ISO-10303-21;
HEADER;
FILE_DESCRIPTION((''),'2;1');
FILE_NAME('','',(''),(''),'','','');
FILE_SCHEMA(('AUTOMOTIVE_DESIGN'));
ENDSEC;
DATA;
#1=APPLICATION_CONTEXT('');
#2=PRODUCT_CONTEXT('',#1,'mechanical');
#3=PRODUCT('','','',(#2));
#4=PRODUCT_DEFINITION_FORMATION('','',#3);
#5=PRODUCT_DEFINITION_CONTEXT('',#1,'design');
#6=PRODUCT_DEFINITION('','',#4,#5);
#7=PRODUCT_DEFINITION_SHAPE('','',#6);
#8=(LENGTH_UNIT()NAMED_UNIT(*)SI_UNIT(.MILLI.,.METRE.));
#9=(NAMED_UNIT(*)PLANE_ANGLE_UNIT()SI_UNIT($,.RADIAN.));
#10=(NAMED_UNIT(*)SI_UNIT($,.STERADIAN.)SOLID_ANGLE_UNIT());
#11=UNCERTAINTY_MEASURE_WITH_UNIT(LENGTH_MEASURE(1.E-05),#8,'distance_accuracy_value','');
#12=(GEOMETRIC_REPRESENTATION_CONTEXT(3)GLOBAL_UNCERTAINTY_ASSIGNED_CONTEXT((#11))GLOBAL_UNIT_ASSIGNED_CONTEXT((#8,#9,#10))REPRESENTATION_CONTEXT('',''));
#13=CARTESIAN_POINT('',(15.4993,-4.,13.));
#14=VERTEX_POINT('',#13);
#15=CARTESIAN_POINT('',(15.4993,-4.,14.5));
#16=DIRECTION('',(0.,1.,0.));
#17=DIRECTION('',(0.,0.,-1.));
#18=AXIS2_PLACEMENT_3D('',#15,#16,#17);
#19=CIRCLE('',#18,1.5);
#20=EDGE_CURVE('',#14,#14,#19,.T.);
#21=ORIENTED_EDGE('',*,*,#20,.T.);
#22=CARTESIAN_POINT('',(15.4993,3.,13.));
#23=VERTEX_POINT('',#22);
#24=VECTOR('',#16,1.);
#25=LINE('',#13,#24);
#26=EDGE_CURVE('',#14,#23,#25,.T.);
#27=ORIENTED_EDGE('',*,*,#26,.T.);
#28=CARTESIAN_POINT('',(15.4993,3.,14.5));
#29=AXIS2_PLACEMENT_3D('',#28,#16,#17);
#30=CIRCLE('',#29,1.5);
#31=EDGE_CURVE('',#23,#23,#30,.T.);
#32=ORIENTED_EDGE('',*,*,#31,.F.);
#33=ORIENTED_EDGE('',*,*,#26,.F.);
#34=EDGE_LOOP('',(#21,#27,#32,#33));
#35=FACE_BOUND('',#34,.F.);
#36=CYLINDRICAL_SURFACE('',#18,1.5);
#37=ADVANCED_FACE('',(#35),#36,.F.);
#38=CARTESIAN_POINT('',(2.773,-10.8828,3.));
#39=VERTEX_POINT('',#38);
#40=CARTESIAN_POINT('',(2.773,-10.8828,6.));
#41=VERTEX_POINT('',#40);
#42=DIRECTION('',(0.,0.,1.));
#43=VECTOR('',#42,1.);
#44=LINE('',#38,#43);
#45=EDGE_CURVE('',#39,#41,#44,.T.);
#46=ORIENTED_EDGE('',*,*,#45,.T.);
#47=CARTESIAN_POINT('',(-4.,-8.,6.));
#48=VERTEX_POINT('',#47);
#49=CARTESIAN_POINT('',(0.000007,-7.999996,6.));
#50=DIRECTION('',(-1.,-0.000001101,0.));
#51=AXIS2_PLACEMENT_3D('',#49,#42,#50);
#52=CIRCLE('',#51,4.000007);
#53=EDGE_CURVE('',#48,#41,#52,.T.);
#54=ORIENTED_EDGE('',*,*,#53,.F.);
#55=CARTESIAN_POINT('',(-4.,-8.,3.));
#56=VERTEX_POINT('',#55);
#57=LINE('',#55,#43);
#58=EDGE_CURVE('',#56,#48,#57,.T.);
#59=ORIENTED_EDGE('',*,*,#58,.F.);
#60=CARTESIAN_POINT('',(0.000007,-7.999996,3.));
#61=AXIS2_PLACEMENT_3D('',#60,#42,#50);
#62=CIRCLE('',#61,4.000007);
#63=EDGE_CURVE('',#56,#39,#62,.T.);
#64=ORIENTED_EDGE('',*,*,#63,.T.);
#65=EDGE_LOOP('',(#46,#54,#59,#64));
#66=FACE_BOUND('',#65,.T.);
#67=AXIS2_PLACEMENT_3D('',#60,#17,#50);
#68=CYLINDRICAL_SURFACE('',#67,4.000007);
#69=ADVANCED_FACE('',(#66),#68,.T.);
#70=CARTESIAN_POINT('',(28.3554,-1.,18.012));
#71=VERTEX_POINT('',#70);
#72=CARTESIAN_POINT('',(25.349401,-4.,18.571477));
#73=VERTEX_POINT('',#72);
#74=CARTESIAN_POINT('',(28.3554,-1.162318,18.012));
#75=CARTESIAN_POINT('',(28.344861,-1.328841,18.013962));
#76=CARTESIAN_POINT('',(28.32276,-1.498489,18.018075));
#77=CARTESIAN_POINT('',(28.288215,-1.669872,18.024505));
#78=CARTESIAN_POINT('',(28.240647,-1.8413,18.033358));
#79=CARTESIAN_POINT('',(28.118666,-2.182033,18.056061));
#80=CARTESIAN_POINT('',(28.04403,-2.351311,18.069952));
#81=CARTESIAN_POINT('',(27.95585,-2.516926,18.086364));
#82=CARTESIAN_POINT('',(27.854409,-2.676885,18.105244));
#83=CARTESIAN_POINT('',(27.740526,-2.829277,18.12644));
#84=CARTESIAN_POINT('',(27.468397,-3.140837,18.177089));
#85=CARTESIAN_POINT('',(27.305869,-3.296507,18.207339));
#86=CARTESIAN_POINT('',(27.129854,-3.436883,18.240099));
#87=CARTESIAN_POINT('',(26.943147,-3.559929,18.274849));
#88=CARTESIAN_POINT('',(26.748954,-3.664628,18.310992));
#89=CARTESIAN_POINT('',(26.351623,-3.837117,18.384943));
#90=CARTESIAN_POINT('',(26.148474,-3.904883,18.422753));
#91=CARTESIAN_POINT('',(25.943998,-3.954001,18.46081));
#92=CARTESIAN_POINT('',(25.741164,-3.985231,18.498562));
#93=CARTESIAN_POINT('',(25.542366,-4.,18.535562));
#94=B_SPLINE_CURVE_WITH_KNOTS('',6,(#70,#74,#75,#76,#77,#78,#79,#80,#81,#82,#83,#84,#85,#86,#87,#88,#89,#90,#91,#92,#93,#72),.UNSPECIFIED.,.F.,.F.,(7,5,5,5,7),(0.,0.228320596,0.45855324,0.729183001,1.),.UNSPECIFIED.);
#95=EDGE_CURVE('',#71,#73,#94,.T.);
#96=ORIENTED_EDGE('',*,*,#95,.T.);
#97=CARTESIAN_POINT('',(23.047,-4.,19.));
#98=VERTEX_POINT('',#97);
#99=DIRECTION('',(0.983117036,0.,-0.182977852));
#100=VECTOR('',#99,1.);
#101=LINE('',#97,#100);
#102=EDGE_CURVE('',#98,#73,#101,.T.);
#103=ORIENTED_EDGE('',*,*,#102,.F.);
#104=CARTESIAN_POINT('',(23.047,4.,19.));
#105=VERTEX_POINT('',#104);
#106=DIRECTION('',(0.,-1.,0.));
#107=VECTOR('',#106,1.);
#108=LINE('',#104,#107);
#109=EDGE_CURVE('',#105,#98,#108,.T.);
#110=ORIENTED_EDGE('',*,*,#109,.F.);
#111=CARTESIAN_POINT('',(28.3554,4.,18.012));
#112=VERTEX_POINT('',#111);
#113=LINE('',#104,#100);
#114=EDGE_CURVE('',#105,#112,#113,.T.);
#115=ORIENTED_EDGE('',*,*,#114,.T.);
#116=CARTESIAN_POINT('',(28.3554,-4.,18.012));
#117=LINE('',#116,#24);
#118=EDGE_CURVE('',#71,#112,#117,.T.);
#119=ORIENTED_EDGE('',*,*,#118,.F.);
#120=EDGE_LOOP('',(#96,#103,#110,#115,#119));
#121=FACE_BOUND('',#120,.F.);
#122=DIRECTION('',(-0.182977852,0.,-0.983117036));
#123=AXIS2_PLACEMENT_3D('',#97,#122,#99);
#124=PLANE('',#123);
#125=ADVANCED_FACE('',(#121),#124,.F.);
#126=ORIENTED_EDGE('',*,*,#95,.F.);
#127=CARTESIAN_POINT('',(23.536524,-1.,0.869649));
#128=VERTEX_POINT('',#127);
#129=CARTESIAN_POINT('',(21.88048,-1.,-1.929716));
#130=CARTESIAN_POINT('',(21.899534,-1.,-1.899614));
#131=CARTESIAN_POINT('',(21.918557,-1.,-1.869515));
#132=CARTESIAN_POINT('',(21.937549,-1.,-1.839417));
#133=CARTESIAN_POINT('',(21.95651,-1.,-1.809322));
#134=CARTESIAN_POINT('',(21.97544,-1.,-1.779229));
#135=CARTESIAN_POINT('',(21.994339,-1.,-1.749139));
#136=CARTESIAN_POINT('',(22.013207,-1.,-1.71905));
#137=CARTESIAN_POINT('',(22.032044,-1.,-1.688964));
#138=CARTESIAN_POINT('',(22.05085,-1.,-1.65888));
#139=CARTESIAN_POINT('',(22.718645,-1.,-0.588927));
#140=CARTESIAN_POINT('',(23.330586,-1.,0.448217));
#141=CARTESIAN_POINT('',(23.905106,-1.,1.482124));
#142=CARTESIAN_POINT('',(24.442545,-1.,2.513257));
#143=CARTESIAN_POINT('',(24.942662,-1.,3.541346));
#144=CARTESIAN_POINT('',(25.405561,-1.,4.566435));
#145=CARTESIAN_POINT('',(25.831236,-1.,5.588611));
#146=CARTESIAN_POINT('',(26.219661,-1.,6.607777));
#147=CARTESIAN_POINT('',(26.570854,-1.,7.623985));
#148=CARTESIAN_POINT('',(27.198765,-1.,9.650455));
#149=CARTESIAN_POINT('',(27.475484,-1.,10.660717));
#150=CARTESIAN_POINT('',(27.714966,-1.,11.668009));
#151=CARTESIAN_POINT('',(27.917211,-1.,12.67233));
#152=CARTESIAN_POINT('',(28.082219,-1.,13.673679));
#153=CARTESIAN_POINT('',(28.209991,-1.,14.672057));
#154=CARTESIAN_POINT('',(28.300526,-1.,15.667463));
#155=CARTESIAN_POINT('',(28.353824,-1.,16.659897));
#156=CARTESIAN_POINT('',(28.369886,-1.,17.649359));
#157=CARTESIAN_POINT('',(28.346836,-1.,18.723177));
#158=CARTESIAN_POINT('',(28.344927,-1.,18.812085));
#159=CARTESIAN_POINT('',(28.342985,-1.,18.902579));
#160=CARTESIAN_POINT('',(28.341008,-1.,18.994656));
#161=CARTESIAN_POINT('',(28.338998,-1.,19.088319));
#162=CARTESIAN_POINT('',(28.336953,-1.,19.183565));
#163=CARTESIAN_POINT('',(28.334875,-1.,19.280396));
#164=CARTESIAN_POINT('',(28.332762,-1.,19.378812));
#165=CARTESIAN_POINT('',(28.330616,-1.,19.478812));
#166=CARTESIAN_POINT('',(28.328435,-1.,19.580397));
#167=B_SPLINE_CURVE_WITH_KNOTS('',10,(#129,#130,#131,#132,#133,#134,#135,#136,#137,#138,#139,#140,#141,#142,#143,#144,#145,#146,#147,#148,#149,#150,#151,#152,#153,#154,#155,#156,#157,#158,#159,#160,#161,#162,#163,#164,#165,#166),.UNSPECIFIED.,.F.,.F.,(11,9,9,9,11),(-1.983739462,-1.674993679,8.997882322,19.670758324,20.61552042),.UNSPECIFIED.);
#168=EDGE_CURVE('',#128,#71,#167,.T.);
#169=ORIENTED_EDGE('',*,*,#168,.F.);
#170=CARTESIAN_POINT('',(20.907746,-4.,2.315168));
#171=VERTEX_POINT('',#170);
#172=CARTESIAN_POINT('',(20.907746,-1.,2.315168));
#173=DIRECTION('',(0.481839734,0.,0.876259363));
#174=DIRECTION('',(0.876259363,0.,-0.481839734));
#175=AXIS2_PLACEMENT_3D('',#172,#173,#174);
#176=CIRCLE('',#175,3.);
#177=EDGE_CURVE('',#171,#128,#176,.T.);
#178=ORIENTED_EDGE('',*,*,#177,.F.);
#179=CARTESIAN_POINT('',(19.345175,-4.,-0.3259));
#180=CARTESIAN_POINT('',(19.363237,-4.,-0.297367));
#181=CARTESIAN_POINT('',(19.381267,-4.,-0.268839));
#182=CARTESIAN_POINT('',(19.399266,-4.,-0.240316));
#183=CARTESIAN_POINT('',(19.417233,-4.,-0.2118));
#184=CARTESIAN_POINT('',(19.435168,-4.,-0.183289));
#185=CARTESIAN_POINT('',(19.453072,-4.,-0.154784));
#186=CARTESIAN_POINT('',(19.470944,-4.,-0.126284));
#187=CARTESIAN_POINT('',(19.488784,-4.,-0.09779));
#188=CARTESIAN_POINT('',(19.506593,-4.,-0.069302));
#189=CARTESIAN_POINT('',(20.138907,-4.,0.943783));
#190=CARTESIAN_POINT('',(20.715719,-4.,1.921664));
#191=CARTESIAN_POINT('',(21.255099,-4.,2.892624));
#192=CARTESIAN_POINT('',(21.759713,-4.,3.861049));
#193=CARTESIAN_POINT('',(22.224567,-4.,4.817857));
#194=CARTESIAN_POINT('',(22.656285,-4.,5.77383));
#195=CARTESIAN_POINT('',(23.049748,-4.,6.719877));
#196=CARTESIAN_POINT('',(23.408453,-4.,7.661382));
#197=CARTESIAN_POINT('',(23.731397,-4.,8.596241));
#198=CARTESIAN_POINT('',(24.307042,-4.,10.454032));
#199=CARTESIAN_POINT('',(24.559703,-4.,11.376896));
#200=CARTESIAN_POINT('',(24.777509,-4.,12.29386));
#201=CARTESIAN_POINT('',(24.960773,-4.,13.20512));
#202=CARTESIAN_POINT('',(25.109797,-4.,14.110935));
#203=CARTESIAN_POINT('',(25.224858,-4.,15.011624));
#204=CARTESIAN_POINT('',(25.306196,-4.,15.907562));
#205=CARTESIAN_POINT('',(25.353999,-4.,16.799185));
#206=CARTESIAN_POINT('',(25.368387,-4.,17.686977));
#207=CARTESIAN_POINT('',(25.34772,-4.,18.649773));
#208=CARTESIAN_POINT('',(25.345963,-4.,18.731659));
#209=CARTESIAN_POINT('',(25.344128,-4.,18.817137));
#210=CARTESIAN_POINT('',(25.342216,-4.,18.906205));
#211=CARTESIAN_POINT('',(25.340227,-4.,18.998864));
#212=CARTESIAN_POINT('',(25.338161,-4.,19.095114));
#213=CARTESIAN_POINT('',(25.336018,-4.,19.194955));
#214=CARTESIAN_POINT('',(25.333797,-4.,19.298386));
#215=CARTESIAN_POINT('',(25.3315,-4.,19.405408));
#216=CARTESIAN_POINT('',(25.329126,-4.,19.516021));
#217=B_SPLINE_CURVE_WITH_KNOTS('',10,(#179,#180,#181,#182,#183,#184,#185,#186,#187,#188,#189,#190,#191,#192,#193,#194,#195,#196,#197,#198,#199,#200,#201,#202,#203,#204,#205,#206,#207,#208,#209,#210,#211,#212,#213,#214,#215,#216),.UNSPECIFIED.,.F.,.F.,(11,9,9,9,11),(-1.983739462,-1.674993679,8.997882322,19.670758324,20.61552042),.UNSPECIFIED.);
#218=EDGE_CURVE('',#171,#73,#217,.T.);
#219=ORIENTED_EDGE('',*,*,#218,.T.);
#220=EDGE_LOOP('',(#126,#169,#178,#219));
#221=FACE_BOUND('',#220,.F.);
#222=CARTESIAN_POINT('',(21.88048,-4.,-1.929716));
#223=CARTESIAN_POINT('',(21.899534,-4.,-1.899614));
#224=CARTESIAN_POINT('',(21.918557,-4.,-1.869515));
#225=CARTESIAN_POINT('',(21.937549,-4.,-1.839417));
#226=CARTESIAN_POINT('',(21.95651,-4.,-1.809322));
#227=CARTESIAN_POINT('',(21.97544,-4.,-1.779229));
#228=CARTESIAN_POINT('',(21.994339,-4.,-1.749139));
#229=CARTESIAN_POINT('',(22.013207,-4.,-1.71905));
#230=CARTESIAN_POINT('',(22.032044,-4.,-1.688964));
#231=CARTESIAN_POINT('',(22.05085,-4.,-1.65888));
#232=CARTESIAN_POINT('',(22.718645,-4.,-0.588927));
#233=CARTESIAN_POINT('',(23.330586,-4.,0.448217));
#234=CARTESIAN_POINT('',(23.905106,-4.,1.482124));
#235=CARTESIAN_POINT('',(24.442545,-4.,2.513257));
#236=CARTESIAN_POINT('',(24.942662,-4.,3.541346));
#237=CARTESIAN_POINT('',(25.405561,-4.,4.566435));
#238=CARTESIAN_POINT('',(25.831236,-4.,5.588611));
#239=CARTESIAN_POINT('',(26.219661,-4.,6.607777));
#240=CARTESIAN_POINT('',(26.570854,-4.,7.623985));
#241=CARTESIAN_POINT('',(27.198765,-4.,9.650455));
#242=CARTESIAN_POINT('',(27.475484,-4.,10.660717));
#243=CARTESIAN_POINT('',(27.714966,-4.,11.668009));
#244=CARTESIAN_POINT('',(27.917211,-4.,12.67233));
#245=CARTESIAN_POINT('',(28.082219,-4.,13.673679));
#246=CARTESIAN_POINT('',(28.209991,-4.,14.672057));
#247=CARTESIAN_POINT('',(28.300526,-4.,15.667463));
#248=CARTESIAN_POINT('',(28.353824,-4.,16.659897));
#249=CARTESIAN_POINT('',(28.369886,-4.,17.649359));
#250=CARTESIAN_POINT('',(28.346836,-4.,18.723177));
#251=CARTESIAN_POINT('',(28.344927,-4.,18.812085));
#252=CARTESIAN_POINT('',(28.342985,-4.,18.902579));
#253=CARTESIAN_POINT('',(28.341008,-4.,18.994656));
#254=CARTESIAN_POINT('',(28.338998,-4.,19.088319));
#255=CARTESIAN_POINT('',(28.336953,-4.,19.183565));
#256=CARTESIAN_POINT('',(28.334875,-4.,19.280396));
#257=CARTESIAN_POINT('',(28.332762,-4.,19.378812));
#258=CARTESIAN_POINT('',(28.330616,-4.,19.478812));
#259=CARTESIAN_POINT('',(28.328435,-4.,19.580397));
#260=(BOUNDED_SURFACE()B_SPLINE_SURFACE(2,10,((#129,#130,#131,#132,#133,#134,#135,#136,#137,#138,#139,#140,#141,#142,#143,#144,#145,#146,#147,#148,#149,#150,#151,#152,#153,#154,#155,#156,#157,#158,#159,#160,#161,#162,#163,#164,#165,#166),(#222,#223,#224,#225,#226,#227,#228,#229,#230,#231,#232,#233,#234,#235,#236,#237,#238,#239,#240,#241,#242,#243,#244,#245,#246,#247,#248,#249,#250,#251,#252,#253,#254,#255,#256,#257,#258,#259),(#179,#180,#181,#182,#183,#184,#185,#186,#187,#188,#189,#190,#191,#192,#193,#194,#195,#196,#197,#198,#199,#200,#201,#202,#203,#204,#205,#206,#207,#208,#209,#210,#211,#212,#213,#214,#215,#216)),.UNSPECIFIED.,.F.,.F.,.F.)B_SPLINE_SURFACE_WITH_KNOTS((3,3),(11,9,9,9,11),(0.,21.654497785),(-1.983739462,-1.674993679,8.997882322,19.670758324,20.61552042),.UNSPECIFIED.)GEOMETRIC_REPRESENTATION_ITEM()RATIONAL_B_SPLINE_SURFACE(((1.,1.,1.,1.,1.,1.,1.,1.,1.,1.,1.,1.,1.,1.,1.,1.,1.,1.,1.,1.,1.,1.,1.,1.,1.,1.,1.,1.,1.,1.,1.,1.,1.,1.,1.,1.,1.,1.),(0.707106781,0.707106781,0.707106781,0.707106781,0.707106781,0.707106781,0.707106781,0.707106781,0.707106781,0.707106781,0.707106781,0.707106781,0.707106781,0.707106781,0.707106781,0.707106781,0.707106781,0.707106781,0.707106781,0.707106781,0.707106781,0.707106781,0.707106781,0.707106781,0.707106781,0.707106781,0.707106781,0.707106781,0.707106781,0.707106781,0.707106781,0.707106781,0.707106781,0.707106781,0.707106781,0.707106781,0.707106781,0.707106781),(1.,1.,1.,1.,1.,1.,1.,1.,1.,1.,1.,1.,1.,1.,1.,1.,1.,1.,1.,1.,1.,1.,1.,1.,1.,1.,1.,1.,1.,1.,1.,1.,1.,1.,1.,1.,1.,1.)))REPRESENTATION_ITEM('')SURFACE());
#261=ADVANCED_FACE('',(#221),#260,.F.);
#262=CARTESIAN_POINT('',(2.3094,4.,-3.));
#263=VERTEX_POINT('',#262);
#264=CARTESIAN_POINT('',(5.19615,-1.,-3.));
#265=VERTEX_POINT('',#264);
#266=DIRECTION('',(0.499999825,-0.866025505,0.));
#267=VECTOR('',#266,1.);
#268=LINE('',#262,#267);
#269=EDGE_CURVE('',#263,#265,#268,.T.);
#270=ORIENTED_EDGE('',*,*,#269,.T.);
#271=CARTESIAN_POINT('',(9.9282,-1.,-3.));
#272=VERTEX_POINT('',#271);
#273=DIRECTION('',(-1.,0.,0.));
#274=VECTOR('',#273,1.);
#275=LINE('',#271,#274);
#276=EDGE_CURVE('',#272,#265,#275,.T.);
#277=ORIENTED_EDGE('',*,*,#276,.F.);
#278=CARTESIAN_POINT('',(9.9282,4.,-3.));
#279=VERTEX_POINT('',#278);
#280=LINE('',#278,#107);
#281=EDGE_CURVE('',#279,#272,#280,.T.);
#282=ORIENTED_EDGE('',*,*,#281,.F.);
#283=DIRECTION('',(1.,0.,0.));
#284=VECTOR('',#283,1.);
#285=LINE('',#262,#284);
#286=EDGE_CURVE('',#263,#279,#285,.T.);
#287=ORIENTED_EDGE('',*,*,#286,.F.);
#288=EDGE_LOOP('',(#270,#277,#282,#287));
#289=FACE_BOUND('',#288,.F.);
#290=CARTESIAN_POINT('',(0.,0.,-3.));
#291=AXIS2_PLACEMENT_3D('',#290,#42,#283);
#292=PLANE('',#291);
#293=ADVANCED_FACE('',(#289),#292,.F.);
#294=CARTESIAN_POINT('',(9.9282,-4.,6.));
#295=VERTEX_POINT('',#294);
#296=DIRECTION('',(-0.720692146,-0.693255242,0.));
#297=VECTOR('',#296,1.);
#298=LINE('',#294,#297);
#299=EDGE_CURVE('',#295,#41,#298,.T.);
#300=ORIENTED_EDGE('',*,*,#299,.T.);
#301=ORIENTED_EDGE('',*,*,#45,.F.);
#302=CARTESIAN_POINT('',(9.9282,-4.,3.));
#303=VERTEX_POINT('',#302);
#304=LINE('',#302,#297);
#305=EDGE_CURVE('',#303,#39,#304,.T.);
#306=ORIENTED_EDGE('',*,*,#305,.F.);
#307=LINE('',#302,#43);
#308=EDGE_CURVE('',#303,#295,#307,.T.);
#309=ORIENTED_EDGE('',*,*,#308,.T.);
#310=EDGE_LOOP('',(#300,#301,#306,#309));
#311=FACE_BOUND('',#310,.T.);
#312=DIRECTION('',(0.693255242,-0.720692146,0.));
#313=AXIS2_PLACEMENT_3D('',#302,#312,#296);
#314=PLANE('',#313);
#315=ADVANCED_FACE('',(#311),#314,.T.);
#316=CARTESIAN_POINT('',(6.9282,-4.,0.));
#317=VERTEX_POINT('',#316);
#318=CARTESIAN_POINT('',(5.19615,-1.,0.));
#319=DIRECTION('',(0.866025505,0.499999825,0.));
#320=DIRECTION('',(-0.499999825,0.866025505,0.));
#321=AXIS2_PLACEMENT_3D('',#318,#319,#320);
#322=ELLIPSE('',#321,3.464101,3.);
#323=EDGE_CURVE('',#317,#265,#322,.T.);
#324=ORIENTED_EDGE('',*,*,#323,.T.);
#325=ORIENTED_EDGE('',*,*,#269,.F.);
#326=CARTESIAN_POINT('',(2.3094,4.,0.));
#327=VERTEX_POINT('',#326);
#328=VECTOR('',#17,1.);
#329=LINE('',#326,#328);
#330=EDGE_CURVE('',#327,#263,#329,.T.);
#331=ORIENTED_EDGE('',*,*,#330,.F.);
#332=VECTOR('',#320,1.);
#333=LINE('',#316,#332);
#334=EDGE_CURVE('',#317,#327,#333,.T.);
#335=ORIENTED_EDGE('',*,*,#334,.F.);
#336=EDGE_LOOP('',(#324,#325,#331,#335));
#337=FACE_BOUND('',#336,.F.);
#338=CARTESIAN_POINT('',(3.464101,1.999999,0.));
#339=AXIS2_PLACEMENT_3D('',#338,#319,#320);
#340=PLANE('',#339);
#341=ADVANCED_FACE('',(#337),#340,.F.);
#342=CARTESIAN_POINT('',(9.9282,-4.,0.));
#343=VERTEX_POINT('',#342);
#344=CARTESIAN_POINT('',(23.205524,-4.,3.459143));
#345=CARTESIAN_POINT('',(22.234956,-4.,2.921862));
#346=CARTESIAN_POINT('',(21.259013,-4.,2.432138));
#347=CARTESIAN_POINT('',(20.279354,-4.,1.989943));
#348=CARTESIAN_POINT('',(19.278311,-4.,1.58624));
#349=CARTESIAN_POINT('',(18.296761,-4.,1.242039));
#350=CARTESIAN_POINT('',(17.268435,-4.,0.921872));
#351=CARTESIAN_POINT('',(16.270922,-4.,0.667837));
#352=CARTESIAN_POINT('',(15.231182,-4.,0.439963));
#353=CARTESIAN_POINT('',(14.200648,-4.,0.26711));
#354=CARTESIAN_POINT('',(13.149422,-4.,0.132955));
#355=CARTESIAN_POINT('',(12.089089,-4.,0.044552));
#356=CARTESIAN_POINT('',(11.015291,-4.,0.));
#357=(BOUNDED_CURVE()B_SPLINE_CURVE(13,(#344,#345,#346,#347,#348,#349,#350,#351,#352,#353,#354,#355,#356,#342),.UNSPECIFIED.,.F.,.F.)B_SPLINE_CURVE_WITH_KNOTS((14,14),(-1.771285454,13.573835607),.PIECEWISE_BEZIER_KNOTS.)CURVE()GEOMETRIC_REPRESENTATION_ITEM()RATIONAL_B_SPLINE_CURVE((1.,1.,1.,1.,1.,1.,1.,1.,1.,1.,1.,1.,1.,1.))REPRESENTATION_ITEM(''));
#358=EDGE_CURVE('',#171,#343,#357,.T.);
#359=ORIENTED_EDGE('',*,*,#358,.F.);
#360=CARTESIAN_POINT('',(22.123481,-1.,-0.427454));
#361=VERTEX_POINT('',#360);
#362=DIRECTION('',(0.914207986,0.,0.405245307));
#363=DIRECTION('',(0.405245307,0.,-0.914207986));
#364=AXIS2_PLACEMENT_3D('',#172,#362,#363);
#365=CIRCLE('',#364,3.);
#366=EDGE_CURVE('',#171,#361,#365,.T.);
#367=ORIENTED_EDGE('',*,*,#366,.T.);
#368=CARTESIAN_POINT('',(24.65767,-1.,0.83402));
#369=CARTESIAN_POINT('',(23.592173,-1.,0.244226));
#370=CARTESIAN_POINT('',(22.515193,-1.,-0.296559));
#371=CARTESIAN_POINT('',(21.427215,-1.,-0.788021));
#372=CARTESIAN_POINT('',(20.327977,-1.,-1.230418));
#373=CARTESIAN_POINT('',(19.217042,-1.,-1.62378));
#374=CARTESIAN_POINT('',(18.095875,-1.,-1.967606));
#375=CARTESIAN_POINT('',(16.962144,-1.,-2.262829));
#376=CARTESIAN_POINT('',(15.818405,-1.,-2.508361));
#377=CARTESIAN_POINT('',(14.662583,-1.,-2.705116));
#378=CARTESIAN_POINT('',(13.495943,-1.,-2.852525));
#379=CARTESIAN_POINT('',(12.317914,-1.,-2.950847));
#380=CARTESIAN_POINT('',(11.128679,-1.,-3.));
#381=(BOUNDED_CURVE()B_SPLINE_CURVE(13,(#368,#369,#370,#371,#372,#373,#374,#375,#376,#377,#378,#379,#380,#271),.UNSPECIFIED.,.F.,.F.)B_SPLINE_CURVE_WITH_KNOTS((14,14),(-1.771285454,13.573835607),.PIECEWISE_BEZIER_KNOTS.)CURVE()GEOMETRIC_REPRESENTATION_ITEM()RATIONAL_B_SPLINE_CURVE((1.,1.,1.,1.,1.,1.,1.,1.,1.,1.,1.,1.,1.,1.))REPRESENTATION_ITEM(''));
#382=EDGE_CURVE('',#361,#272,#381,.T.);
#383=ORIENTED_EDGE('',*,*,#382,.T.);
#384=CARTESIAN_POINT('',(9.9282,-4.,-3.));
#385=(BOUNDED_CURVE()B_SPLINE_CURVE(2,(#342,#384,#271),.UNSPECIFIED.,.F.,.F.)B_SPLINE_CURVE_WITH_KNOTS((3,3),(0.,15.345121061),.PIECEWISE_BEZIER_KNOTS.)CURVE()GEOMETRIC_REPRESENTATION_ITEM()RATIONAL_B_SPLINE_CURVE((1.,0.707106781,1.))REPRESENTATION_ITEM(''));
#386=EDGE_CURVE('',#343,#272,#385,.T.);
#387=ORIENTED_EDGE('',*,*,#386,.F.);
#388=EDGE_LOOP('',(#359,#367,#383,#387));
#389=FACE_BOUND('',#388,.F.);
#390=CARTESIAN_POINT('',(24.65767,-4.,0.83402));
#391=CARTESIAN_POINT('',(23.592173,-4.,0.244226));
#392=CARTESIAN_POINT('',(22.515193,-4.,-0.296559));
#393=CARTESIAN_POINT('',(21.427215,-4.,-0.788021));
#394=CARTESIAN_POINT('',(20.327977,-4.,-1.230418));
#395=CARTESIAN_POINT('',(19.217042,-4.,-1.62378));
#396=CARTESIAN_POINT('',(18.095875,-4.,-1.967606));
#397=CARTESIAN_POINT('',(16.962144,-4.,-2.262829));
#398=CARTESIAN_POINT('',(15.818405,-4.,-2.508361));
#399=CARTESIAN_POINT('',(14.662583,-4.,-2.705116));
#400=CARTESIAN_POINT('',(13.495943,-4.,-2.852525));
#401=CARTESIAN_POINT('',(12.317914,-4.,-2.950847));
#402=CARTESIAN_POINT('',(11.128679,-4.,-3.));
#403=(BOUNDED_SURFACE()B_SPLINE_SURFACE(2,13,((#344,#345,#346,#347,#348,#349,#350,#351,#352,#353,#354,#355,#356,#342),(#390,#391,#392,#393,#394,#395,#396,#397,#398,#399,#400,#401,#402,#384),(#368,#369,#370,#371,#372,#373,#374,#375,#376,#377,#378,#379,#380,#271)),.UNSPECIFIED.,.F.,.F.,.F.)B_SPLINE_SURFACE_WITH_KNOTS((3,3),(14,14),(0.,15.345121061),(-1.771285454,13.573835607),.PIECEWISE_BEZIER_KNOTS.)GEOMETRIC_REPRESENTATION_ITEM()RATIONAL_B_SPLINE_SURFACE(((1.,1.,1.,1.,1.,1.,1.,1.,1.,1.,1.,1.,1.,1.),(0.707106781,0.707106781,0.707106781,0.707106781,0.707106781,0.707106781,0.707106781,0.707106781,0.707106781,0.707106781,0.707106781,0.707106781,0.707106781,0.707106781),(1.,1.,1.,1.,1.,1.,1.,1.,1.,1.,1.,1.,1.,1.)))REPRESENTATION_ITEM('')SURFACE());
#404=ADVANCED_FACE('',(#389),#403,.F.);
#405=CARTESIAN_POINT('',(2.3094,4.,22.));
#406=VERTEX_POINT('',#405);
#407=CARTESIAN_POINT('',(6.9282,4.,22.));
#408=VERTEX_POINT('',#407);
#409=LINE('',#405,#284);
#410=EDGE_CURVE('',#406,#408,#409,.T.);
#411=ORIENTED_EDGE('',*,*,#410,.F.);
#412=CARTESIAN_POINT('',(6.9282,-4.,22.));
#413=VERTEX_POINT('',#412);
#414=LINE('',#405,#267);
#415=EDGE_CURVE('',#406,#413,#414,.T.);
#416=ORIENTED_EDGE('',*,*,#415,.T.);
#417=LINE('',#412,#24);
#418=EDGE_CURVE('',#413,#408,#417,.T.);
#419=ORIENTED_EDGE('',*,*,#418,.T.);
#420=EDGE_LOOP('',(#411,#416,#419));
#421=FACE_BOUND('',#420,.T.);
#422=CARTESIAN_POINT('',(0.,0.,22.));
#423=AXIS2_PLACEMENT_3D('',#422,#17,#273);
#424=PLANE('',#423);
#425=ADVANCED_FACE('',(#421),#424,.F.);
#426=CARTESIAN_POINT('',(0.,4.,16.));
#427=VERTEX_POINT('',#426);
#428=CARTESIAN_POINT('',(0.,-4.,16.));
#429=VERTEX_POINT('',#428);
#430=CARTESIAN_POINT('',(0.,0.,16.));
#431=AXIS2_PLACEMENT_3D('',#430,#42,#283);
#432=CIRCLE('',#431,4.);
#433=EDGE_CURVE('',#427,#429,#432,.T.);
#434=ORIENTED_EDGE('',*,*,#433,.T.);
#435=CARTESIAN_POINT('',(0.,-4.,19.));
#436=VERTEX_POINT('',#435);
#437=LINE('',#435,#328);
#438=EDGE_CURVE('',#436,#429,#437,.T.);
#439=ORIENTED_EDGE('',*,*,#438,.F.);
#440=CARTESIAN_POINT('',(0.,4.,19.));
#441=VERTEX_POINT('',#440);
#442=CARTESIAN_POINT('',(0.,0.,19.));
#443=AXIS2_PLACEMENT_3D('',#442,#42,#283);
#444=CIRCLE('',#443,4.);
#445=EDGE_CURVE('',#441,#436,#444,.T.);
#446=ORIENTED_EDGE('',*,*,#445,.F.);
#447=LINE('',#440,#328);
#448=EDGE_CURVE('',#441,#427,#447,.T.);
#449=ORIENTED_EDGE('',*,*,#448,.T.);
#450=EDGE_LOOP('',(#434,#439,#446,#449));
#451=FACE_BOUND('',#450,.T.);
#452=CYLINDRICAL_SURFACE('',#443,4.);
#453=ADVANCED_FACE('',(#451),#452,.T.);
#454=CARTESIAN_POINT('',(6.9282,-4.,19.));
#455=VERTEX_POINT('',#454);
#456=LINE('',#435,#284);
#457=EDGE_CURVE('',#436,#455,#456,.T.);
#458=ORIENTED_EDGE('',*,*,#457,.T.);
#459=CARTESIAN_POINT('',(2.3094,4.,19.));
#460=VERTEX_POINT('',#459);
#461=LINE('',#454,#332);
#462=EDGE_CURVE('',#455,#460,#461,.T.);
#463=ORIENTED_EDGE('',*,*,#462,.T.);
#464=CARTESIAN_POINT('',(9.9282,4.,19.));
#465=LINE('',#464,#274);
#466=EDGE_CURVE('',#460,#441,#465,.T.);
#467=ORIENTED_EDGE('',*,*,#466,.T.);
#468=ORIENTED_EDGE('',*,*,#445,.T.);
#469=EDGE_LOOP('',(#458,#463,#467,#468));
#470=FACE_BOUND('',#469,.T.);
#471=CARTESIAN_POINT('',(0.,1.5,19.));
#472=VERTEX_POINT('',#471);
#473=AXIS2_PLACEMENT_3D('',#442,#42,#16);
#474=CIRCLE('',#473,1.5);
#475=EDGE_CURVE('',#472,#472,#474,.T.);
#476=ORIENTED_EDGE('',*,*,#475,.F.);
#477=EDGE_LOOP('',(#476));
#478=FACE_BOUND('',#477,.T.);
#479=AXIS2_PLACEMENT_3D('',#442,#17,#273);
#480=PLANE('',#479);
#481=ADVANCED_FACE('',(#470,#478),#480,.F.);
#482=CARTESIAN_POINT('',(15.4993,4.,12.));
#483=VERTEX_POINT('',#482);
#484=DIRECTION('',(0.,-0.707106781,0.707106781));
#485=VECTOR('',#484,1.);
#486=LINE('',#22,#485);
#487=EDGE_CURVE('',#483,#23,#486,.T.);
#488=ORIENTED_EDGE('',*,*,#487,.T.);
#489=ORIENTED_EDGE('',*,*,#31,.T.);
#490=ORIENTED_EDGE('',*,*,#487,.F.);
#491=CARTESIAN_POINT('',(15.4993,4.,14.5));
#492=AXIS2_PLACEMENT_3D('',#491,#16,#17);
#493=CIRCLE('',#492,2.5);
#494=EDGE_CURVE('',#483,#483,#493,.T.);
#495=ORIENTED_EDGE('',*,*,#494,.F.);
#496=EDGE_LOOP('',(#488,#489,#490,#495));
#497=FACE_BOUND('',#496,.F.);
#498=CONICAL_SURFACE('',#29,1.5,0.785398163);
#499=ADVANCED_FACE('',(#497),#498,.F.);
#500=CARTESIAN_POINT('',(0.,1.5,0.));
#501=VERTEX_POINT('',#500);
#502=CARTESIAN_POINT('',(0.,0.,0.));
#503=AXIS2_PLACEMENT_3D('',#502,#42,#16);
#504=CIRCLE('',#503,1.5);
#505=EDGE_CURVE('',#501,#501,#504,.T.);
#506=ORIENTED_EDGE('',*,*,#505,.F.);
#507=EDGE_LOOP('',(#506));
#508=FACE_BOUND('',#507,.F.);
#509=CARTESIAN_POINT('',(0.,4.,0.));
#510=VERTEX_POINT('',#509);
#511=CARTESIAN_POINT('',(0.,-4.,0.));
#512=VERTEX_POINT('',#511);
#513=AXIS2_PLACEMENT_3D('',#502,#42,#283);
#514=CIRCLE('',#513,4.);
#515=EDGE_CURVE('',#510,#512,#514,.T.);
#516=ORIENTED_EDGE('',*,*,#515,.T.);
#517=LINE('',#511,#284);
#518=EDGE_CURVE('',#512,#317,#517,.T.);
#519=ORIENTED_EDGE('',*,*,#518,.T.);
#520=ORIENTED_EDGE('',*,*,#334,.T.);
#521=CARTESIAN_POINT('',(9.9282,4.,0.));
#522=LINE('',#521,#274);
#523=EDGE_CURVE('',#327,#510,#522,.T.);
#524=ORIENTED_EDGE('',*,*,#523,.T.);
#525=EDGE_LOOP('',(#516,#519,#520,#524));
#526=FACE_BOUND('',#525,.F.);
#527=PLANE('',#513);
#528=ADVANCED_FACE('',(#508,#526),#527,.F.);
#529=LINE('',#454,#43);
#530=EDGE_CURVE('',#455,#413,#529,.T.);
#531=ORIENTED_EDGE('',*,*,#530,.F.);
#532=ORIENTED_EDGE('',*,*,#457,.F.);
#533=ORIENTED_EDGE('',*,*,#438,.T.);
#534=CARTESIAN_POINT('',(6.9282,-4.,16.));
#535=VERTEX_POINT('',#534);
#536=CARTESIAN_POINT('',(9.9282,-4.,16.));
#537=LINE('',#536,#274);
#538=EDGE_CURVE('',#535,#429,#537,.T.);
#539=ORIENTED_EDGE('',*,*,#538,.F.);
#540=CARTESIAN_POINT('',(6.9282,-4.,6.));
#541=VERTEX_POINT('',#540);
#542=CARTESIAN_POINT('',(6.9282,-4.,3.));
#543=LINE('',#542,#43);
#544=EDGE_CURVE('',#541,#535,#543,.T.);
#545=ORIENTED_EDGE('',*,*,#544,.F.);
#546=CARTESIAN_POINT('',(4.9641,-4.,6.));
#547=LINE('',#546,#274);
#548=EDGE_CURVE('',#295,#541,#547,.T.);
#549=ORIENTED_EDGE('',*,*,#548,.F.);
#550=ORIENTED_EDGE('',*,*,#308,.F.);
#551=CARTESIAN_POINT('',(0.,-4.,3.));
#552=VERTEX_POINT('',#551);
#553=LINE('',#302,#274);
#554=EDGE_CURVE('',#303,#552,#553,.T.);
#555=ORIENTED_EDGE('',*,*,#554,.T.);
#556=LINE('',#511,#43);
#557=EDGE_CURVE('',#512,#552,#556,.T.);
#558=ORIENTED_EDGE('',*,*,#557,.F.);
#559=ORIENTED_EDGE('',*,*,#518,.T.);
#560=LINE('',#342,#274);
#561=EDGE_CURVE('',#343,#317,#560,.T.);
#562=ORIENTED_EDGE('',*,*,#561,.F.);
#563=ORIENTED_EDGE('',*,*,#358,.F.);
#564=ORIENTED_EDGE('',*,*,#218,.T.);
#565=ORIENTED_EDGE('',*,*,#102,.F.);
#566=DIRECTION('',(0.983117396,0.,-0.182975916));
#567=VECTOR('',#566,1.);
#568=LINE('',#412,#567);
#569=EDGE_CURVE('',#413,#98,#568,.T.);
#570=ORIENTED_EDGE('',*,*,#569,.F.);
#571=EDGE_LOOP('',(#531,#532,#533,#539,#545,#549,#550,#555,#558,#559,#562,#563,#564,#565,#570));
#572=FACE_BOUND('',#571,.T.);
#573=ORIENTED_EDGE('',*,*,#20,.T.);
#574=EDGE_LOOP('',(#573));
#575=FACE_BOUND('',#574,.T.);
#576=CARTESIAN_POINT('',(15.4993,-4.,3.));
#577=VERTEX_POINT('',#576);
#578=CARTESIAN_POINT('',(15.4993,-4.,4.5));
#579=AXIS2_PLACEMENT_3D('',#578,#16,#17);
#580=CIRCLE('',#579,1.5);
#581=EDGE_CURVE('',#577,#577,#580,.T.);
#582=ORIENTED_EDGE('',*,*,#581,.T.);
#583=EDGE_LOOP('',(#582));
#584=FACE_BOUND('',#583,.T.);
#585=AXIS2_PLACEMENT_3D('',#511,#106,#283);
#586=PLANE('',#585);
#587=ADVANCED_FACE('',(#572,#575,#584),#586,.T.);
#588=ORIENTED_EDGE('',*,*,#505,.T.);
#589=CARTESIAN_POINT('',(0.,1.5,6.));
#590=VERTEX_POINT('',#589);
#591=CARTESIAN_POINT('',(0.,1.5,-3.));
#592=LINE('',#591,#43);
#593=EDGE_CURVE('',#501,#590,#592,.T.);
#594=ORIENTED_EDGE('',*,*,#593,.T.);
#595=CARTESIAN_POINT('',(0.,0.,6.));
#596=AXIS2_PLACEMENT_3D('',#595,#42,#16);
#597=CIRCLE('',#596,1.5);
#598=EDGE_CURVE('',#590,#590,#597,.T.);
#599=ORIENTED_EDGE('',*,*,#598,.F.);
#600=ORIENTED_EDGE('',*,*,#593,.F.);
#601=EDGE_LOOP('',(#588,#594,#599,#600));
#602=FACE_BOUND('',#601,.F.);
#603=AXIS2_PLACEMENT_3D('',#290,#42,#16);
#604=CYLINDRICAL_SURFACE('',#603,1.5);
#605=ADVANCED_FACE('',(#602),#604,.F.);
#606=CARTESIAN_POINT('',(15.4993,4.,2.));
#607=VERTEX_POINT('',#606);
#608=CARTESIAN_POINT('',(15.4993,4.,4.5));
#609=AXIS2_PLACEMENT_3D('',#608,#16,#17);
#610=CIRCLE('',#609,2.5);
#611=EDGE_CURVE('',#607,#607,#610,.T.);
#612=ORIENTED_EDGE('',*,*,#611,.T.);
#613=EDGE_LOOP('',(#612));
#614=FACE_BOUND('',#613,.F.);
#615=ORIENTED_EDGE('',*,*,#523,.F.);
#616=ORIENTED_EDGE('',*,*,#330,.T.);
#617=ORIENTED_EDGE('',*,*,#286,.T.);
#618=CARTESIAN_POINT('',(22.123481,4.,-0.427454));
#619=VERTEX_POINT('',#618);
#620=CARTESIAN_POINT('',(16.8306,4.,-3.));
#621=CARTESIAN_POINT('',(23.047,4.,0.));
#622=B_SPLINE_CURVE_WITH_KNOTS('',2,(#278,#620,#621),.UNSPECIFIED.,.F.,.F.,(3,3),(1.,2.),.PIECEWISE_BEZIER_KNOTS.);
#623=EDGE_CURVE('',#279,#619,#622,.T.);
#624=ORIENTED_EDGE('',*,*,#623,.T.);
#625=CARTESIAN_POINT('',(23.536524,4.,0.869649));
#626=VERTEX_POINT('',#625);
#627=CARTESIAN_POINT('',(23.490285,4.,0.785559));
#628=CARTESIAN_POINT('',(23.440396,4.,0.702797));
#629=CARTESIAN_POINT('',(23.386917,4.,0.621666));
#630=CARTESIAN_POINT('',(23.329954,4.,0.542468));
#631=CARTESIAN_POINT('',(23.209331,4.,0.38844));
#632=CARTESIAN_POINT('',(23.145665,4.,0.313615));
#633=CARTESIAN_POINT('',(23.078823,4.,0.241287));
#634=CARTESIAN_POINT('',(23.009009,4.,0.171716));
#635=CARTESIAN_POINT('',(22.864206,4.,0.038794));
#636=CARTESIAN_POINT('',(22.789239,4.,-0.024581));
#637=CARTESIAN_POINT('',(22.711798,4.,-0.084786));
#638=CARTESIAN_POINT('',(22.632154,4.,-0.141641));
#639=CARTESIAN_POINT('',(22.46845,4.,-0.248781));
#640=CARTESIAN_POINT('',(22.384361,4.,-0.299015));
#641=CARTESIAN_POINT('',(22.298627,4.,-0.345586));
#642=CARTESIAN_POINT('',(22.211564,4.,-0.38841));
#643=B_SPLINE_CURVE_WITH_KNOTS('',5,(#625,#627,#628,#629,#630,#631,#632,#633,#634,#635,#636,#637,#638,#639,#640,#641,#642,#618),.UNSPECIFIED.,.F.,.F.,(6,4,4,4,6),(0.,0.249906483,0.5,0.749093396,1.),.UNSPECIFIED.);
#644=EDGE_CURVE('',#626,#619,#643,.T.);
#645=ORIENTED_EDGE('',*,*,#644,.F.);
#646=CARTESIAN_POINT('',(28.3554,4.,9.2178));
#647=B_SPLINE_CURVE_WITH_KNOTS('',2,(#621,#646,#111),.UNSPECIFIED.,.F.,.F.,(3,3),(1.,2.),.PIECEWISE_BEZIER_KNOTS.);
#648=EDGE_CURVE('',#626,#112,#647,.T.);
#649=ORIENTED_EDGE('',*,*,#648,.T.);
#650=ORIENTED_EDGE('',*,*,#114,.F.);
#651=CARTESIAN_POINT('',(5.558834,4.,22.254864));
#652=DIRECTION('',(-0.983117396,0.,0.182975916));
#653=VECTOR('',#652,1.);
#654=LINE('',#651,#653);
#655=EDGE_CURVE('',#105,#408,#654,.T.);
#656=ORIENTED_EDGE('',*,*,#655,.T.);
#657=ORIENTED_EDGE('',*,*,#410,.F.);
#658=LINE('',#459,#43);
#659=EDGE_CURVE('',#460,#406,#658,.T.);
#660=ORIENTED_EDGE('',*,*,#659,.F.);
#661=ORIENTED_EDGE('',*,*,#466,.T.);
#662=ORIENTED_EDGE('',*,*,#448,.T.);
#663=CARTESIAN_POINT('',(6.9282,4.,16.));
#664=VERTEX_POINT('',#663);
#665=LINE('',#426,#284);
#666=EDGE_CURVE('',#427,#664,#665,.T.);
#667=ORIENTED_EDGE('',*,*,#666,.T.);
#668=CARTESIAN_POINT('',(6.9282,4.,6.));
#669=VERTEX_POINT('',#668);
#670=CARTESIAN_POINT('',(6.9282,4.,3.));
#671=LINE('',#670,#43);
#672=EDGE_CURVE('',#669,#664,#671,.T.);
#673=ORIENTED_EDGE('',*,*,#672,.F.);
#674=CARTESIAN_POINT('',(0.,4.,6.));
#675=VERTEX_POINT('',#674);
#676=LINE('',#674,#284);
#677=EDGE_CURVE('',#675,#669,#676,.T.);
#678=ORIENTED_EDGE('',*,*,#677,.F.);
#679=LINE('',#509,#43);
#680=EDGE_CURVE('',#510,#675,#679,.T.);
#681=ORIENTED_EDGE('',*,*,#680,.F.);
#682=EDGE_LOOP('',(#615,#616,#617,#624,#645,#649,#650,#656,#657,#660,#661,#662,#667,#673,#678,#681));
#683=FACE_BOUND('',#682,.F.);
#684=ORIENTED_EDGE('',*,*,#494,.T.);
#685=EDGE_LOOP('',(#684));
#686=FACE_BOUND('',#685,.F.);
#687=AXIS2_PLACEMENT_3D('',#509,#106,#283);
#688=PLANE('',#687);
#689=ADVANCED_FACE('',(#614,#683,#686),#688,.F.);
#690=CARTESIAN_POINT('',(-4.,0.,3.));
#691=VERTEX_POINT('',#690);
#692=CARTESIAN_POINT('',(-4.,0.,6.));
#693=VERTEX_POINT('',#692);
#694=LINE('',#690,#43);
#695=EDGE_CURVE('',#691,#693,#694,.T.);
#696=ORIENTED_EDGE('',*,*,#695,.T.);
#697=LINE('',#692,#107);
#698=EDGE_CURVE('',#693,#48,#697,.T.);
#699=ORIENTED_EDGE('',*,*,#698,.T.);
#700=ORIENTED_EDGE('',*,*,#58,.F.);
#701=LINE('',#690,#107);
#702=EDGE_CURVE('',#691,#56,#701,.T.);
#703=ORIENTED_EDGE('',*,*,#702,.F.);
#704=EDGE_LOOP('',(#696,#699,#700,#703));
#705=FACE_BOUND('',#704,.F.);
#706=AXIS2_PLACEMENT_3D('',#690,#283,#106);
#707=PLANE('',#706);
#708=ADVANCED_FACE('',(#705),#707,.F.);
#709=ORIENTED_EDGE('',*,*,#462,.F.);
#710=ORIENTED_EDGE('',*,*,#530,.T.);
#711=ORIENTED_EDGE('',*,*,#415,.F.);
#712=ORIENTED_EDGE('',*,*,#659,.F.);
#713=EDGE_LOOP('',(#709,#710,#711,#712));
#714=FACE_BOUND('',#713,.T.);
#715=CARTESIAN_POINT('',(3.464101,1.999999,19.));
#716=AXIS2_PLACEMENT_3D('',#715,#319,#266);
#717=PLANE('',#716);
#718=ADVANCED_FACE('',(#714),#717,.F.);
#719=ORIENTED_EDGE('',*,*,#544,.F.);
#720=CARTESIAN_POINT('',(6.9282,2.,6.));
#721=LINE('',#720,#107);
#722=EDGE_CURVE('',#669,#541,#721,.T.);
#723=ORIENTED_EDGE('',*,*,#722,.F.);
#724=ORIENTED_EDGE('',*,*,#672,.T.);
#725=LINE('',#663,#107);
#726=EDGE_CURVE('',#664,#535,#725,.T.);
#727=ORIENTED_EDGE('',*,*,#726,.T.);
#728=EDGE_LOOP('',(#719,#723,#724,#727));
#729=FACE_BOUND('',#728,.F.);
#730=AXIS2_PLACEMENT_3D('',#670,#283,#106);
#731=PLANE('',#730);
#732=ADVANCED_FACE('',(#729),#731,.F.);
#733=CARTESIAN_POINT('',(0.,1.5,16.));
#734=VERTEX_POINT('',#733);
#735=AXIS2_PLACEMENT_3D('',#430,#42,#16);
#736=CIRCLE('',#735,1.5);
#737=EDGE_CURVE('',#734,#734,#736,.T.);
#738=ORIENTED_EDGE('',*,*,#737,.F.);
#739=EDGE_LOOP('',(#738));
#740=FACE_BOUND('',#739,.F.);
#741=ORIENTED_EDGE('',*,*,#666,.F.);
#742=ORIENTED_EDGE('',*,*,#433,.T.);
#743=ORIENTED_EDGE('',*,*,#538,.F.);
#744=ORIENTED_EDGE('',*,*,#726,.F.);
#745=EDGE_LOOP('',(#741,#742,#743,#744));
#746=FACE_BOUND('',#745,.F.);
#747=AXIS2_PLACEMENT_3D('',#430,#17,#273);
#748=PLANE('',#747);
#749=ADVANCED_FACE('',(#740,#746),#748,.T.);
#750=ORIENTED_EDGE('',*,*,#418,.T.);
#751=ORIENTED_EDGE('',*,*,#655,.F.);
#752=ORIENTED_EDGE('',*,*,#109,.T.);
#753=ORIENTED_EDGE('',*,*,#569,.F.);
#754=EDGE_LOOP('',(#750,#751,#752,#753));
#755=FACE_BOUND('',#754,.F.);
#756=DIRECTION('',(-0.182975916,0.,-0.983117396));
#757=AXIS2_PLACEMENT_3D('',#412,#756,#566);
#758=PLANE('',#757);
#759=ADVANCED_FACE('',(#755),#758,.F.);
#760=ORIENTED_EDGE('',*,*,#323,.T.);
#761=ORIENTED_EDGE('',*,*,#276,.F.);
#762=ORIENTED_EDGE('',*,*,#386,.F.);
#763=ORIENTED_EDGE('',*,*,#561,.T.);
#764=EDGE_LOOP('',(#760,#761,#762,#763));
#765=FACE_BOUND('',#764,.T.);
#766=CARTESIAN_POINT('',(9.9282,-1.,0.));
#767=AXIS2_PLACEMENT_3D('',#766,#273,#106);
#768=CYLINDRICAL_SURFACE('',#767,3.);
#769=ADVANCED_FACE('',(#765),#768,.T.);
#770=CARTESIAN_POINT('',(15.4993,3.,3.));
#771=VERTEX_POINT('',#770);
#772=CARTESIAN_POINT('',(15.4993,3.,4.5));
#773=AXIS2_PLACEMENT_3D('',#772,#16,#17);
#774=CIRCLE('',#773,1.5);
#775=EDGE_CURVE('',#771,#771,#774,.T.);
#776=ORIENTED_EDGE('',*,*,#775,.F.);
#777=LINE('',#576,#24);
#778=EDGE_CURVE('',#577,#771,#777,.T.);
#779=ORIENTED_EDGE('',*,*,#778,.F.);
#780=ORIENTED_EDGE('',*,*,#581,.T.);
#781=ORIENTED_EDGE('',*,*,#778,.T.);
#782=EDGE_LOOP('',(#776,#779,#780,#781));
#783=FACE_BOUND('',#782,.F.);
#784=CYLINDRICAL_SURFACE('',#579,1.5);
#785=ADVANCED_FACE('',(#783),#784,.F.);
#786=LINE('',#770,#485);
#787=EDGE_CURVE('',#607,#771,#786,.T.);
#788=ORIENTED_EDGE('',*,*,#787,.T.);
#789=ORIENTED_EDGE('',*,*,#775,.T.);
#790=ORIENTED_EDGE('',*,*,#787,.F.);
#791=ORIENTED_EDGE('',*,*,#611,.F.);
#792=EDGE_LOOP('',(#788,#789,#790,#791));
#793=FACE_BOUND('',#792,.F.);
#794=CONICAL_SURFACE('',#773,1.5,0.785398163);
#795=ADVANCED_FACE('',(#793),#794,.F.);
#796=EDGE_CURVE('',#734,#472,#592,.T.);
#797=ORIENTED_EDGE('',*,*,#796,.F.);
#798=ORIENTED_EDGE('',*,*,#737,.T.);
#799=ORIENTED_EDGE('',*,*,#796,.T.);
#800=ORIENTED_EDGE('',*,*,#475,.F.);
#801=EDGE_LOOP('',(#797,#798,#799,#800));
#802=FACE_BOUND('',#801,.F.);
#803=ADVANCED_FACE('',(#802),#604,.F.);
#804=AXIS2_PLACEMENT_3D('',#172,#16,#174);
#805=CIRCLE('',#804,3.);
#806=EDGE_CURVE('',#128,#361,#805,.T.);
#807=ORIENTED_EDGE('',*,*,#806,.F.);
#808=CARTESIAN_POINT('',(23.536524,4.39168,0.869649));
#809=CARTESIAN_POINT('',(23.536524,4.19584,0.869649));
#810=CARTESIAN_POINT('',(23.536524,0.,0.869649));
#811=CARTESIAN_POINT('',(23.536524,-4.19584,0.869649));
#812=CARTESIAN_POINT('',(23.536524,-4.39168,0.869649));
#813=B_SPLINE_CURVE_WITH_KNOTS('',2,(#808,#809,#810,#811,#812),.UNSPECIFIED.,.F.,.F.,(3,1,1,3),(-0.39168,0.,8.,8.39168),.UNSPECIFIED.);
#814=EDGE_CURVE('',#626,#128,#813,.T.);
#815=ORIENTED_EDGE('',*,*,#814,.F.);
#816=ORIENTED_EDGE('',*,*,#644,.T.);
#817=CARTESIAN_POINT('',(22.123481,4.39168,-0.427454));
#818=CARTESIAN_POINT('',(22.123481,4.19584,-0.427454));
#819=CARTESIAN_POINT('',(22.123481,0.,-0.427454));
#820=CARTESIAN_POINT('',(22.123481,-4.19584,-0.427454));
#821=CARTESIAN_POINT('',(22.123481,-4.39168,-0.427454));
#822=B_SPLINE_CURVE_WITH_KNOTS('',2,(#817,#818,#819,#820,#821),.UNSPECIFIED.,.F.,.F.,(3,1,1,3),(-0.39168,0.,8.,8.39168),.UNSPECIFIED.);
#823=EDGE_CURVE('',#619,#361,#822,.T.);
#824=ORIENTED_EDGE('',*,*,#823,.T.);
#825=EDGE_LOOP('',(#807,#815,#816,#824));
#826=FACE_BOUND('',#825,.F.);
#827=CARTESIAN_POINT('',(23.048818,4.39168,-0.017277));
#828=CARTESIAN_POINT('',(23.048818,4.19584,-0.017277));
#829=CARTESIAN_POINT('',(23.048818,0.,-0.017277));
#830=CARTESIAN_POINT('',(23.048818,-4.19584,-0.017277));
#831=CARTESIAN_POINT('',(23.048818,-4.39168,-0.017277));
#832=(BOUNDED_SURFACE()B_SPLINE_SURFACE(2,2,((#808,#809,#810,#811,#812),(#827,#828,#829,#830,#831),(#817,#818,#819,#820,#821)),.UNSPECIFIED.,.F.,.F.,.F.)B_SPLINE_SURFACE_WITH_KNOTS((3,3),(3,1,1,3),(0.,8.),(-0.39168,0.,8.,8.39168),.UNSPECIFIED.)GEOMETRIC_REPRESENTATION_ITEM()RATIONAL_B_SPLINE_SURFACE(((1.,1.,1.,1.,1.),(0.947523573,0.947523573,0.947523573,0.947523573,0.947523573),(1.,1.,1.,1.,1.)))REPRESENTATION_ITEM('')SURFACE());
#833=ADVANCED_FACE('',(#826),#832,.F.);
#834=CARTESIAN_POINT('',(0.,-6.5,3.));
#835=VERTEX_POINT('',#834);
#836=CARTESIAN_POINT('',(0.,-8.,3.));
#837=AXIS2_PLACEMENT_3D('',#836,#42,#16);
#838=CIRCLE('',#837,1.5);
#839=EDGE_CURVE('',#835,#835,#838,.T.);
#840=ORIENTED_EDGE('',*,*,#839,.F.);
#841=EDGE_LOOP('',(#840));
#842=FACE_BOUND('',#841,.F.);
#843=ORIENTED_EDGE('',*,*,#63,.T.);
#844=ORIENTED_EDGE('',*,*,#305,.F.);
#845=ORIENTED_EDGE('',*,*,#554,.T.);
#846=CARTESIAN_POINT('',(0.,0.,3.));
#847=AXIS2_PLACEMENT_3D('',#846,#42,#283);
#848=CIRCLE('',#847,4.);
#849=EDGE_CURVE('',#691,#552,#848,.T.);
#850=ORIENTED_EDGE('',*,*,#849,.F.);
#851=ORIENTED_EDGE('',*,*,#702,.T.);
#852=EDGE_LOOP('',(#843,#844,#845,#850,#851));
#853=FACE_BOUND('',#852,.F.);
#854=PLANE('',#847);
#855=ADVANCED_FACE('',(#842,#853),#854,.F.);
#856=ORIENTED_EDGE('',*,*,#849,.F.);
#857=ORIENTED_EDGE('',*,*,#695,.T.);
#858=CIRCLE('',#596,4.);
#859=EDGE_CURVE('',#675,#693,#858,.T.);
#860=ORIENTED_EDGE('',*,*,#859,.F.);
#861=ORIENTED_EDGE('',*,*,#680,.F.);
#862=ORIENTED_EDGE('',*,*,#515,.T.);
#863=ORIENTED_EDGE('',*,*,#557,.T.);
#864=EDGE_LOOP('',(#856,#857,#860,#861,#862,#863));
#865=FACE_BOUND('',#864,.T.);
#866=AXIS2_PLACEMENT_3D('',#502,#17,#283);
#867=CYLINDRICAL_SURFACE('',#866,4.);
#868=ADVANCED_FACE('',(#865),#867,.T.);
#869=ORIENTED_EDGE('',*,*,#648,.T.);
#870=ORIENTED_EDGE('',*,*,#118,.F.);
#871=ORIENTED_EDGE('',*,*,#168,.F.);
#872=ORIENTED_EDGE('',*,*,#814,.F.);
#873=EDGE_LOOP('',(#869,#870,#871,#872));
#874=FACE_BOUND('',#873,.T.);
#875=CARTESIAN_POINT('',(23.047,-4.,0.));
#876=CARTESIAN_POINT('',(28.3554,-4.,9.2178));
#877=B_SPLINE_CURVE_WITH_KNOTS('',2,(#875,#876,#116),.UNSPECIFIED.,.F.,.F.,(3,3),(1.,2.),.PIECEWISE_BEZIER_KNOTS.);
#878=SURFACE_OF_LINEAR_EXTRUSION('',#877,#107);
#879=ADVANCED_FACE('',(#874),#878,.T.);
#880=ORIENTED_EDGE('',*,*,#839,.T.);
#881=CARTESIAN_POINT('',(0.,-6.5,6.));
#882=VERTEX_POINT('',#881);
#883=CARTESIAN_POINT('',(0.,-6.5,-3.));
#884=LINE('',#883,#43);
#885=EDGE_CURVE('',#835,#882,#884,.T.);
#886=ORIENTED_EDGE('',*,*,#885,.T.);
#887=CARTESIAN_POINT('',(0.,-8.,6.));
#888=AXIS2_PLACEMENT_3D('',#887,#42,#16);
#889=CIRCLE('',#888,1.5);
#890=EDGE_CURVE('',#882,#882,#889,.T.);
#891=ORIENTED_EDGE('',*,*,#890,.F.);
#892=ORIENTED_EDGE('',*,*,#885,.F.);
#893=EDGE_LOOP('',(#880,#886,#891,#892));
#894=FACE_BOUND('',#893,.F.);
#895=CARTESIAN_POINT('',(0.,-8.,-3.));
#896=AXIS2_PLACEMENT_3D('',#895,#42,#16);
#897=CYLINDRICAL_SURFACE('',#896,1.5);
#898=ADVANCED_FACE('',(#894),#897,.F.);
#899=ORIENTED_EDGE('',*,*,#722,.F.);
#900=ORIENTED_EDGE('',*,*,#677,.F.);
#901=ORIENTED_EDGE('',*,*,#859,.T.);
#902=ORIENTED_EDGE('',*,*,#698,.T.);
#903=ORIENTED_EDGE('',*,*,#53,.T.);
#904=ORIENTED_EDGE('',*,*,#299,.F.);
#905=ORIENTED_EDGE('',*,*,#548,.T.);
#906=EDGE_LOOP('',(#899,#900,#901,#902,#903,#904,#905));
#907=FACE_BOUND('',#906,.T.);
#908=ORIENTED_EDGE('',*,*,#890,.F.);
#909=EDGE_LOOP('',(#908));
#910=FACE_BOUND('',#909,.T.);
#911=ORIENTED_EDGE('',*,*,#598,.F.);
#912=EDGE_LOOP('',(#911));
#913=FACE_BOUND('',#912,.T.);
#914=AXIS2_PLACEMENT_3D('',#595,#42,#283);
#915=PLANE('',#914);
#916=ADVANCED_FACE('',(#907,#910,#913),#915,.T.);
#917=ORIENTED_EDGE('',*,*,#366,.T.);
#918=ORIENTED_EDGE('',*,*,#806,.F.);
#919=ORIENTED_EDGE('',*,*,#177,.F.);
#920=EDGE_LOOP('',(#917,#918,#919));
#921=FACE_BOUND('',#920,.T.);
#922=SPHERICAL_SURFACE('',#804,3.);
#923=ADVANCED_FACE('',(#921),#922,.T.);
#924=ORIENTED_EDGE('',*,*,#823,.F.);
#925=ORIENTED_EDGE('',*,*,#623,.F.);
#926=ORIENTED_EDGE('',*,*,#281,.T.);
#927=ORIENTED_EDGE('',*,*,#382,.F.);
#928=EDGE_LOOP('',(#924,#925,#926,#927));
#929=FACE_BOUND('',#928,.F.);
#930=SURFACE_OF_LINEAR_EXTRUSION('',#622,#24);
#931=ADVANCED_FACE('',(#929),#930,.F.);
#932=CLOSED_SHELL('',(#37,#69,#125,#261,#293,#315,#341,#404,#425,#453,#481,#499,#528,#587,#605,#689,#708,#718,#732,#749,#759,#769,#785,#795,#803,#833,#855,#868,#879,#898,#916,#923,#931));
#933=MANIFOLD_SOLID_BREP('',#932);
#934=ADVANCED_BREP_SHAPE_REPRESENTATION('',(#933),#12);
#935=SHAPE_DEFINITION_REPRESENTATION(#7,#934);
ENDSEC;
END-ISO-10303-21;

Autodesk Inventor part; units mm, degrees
ref_plane "YZ Plane" through (0, 0, 0) normal (1, 0, 0) x (0, 1, 0)
ref_plane "XZ Plane" through (0, 0, 0) normal (0, 1, 0) x (-1, 0, 0)
ref_plane "XY Plane" through (0, 0, 0) normal (0, 0, 1) x (1, 0, 0)
sketch "Skizze1" plane through (0, 0, 0) normal (0, 0, 1) x (1, 0, 0)
  circle A0 centre (0, 0) radius 4
  line L0 (2.3094, 4) -> (9.9282, 4)
  line L1 (9.9282, 4) -> (9.9282, -4)
  line L2 (9.9282, -4) -> (6.9282, -4)
  line L3 (6.9282, -4) -> (2.3094, 4)
  line L4 (0, -4) -> (6.9282, -4)
  line L5 (2.3094, 4) -> (0, 4)
  dimension "d0" = 8
  dimension "d2" = 60
  dimension "d10" = 3
extrude "Extrusion1" add sketch "Skizze1" along normal blind 3
extrude "Extrusion2" add sketch "Skizze1" against normal blind 3 contours L3 L0 L1 L2
sketch "Skizze2" plane through (0, 0, 3) normal (0, 0, 1) x (1, 0, 0)
  line L0 (2.3094, 4) -> (9.9282, 4) projected
  line L1 (9.9282, 4) -> (9.9282, -4) projected
  line L2 (9.9282, -4) -> (6.9282, -4) projected
  line L3 (6.9282, -4) -> (2.3094, 4) projected
  line L4 (6.9282, -4) -> (9.9282, -4)
  line L5 (9.9282, -4) -> (9.9282, 4)
  line L6 (9.9282, 4) -> (6.9282, 4)
  line L7 (6.9282, 4) -> (6.9282, -4)
extrude "Extrusion3" add sketch "Skizze2" along normal blind 6.5 contours L0 L1 L2 L7
mirror "Spiegeln1" about plane through (8.4282, 0, 9.5) normal (0, 0, 1)
sketch "Skizze4" plane through (0, 0, 3) normal (0, 0, 1) x (1, 0, 0)
  line L0 (6.9282, -4) -> (6.9282, 4) projected
  line L1 (6.9282, 4) -> (0, 4) projected
  arc A0 (0, 4) -> (0, -4) centre (0, 0) ccw projected
  line L2 (0, -4) -> (6.9282, -4) projected
  line L3 (2.3094, 4) -> (9.9282, 4) projected
  line L4 (9.9282, 4) -> (9.9282, -4) projected
  line L5 (9.9282, -4) -> (6.9282, -4) projected
  line L6 (6.9282, -4) -> (2.3094, 4) projected
  line L7 (-4, 0) -> (-4, -8)
  line L8 (0, 0) -> (0, -8) construction
  line L9 (9.9282, -4) -> (2.773, -10.8828)
  arc A1 (-4, -8) -> (2.773, -10.8828) centre (0, -8) ccw
  arc A2 (0, 4) -> (-4, 0) centre (0, 0) ccw
  line L10 (0, 4) -> (9.9282, 4)
  line L11 (9.9282, -4) -> (9.9282, 4)
  dimension "d18" = 8
extrude "Extrusion4" [suppressed]
extrude "Extrusion5" add sketch "Skizze4" along normal blind 3
sketch "Skizze5" plane through (0, 0, -3) normal (0, 0, -1) x (-1, 0, 0)
  line L0 (-2.3094, 4) -> (-6.9282, -4) projected
  line L1 (0, -4) -> (-6.9282, -4) projected
  arc A0 (0, -4) -> (0, 4) centre (0, 0) ccw projected
  line L2 (-2.3094, 4) -> (0, 4) projected
  line L3 (0, -4) -> (-9.9282, -4) projected
  line L4 (-2.773, -10.8828) -> (-9.9282, -4) projected
  arc A1 (-2.773, -10.8828) -> (4, -8) centre (0, -8) ccw projected
  line L5 (4, 0) -> (4, -8) projected
  arc A2 (0, -4) -> (4, 0) centre (0, 0) ccw projected
hole "Bohrung2" at (0, 0, -3) at (0, -8, -3) direction (0, 0, 1) diameter 3 end through all
sketch "Skizze7" plane through (0, 4, 0) normal (0, 1, 0) x (1, 0, 0)
  line L0 (9.9282, 3) -> (9.9282, -22) projected
  line L1 (2.3094, 3) -> (9.9282, 3) projected
  line L2 (0, 0) -> (0, -6) projected
  line L3 (6.9282, -6) -> (0, -6) projected
  line L4 (9.9282, 3) -> (16.8306, 3) construction
  line L5 (16.8306, 3) -> (23.047, 0) construction
  spline S0 degree 2 poles (9.9282, 3) (16.8306, 3) (23.047, 0) knots 1 1 1 2 2 2
  arc A0 (24.9282, -9.5) -> (23.047, 0) centre (0, -9.5) ccw
  line L6 (9.9282, -9.5) -> (32.3299, -9.5) construction
  line L7 (23.047, 0) -> (2.3094, 0) construction
  line L8 (9.9282, -22) -> (16.8306, -22) construction
  line L9 (16.8306, -22) -> (23.047, -19) construction
  spline S1 degree 2 poles (9.9282, -22) (16.8306, -22) (23.047, -19) knots 1 1 1 2 2 2
  arc A1 (23.047, -19) -> (24.9282, -9.5) centre (0, -9.5) ccw
  dimension "d30" = 15
extrude "Extrusion6" add sketch "Skizze7" against normal up to surface (8 mm away)
sketch "Skizze8" plane through (0, -4, 16) normal (0, -1, 0) x (1, 0, 0)
  arc A0 (19.9211, -13.9956) -> (20.4401, 0.0137) centre (6.9282, -6.5) ccw
  line L0 (9.9282, -13) -> (9.9282, -10)
  line L1 (0, -16) -> (6.9282, -16)
  line L2 (6.9282, -6.5) -> (21.9282, -6.5)
  line L3 (9.9282, -11.5) -> (21.0703, -11.5)
  arc A1 (23.047, -16) -> (23.047, 3) centre (0, -6.5) ccw projected
  line L4 (6.9282, -10) -> (6.9282, 0) projected
  point P0 (15.4993, -1.5)
  point P1 (15.4993, -11.5)
  dimension "d55" = 3
hole "Bohrung3" at (15.4993, -4, 14.5) at (15.4993, -4, 4.5) direction (0, 1, 0) diameter 3 end through all
chamfer "Fase3" distance 1 angle 45 2 edges at (15.4993, 4, 6) (15.4993, 4, 16)
sketch "Skizze12" plane through (0, -4, 0) normal (0, -1, 0) x (1, 0, 0)
  spline S0 degree 2 poles (9.9282, 22) (16.8306, 22) (23.047, 19) knots 0 0 0 1 1 1 projected
  line L0 (9.9282, 22) -> (6.9282, 22) projected
  line L1 (6.9282, 22) -> (23.047, 19)
extrude "Extrusion10" cut sketch "Skizze12" against normal through all
sketch "Skizze13" plane through (0, -4, 0) normal (0, -1, 0) x (1, 0, 0)
  line L0 (23.047, 19) -> (6.9282, 22) projected
  line L1 (6.9282, 6) -> (6.9282, 16) projected
  arc A0 (23.047, 0) -> (23.047, 19) centre (0, 9.5) ccw projected
  line L2 (23.047, 19) -> (28.3554, 18.012)
  line L3 (23.047, 0) -> (28.3554, 9.2178) construction
  line L4 (28.3554, 9.2178) -> (28.3554, 18.012) construction
  spline S0 degree 2 poles (23.047, 0) (28.3554, 9.2178) (28.3554, 18.012) knots 1 1 1 2 2 2
extrude "Extrusion11" add sketch "Skizze13" against normal up to surface (8 mm away)
fillet "Rundung2" radius 3 4 edges at (23.047, 0, 0) (27.0283, -4, 9.1119) (8.4282, -4, -3) (16.6591, -4, -2.25)
equation "\"d0\" = Finger_diameter"
equation "\"d10\" = FingerWall"
equation "\"d4\" = FingerWall"
equation "\"d6\" = FingerWall"
equation "\"d8\" = -1.5 * FingerWall + 0.5 * Finger_width"
equation "\"d18\" = Finger_diameter"
equation "\"d23\" = bearingHole"
equation "\"FingerLaenge_B\" = 25"
equation "\"Hebel_B\" = 25"
equation "\"Finger_width\" = 22"
equation "\"Finger_diameter\" = 8"
equation "\"FingerWall\" = 3"
equation "\"Hebel_basis_2\" = 15"
equation "\"Join_width\" = 3"
equation "\"bearingHole\" = 3"
equation "\"bearingWall\" = 4"
equation "\"support_D\" = 0.25"
properties part number "FingerTipp"
